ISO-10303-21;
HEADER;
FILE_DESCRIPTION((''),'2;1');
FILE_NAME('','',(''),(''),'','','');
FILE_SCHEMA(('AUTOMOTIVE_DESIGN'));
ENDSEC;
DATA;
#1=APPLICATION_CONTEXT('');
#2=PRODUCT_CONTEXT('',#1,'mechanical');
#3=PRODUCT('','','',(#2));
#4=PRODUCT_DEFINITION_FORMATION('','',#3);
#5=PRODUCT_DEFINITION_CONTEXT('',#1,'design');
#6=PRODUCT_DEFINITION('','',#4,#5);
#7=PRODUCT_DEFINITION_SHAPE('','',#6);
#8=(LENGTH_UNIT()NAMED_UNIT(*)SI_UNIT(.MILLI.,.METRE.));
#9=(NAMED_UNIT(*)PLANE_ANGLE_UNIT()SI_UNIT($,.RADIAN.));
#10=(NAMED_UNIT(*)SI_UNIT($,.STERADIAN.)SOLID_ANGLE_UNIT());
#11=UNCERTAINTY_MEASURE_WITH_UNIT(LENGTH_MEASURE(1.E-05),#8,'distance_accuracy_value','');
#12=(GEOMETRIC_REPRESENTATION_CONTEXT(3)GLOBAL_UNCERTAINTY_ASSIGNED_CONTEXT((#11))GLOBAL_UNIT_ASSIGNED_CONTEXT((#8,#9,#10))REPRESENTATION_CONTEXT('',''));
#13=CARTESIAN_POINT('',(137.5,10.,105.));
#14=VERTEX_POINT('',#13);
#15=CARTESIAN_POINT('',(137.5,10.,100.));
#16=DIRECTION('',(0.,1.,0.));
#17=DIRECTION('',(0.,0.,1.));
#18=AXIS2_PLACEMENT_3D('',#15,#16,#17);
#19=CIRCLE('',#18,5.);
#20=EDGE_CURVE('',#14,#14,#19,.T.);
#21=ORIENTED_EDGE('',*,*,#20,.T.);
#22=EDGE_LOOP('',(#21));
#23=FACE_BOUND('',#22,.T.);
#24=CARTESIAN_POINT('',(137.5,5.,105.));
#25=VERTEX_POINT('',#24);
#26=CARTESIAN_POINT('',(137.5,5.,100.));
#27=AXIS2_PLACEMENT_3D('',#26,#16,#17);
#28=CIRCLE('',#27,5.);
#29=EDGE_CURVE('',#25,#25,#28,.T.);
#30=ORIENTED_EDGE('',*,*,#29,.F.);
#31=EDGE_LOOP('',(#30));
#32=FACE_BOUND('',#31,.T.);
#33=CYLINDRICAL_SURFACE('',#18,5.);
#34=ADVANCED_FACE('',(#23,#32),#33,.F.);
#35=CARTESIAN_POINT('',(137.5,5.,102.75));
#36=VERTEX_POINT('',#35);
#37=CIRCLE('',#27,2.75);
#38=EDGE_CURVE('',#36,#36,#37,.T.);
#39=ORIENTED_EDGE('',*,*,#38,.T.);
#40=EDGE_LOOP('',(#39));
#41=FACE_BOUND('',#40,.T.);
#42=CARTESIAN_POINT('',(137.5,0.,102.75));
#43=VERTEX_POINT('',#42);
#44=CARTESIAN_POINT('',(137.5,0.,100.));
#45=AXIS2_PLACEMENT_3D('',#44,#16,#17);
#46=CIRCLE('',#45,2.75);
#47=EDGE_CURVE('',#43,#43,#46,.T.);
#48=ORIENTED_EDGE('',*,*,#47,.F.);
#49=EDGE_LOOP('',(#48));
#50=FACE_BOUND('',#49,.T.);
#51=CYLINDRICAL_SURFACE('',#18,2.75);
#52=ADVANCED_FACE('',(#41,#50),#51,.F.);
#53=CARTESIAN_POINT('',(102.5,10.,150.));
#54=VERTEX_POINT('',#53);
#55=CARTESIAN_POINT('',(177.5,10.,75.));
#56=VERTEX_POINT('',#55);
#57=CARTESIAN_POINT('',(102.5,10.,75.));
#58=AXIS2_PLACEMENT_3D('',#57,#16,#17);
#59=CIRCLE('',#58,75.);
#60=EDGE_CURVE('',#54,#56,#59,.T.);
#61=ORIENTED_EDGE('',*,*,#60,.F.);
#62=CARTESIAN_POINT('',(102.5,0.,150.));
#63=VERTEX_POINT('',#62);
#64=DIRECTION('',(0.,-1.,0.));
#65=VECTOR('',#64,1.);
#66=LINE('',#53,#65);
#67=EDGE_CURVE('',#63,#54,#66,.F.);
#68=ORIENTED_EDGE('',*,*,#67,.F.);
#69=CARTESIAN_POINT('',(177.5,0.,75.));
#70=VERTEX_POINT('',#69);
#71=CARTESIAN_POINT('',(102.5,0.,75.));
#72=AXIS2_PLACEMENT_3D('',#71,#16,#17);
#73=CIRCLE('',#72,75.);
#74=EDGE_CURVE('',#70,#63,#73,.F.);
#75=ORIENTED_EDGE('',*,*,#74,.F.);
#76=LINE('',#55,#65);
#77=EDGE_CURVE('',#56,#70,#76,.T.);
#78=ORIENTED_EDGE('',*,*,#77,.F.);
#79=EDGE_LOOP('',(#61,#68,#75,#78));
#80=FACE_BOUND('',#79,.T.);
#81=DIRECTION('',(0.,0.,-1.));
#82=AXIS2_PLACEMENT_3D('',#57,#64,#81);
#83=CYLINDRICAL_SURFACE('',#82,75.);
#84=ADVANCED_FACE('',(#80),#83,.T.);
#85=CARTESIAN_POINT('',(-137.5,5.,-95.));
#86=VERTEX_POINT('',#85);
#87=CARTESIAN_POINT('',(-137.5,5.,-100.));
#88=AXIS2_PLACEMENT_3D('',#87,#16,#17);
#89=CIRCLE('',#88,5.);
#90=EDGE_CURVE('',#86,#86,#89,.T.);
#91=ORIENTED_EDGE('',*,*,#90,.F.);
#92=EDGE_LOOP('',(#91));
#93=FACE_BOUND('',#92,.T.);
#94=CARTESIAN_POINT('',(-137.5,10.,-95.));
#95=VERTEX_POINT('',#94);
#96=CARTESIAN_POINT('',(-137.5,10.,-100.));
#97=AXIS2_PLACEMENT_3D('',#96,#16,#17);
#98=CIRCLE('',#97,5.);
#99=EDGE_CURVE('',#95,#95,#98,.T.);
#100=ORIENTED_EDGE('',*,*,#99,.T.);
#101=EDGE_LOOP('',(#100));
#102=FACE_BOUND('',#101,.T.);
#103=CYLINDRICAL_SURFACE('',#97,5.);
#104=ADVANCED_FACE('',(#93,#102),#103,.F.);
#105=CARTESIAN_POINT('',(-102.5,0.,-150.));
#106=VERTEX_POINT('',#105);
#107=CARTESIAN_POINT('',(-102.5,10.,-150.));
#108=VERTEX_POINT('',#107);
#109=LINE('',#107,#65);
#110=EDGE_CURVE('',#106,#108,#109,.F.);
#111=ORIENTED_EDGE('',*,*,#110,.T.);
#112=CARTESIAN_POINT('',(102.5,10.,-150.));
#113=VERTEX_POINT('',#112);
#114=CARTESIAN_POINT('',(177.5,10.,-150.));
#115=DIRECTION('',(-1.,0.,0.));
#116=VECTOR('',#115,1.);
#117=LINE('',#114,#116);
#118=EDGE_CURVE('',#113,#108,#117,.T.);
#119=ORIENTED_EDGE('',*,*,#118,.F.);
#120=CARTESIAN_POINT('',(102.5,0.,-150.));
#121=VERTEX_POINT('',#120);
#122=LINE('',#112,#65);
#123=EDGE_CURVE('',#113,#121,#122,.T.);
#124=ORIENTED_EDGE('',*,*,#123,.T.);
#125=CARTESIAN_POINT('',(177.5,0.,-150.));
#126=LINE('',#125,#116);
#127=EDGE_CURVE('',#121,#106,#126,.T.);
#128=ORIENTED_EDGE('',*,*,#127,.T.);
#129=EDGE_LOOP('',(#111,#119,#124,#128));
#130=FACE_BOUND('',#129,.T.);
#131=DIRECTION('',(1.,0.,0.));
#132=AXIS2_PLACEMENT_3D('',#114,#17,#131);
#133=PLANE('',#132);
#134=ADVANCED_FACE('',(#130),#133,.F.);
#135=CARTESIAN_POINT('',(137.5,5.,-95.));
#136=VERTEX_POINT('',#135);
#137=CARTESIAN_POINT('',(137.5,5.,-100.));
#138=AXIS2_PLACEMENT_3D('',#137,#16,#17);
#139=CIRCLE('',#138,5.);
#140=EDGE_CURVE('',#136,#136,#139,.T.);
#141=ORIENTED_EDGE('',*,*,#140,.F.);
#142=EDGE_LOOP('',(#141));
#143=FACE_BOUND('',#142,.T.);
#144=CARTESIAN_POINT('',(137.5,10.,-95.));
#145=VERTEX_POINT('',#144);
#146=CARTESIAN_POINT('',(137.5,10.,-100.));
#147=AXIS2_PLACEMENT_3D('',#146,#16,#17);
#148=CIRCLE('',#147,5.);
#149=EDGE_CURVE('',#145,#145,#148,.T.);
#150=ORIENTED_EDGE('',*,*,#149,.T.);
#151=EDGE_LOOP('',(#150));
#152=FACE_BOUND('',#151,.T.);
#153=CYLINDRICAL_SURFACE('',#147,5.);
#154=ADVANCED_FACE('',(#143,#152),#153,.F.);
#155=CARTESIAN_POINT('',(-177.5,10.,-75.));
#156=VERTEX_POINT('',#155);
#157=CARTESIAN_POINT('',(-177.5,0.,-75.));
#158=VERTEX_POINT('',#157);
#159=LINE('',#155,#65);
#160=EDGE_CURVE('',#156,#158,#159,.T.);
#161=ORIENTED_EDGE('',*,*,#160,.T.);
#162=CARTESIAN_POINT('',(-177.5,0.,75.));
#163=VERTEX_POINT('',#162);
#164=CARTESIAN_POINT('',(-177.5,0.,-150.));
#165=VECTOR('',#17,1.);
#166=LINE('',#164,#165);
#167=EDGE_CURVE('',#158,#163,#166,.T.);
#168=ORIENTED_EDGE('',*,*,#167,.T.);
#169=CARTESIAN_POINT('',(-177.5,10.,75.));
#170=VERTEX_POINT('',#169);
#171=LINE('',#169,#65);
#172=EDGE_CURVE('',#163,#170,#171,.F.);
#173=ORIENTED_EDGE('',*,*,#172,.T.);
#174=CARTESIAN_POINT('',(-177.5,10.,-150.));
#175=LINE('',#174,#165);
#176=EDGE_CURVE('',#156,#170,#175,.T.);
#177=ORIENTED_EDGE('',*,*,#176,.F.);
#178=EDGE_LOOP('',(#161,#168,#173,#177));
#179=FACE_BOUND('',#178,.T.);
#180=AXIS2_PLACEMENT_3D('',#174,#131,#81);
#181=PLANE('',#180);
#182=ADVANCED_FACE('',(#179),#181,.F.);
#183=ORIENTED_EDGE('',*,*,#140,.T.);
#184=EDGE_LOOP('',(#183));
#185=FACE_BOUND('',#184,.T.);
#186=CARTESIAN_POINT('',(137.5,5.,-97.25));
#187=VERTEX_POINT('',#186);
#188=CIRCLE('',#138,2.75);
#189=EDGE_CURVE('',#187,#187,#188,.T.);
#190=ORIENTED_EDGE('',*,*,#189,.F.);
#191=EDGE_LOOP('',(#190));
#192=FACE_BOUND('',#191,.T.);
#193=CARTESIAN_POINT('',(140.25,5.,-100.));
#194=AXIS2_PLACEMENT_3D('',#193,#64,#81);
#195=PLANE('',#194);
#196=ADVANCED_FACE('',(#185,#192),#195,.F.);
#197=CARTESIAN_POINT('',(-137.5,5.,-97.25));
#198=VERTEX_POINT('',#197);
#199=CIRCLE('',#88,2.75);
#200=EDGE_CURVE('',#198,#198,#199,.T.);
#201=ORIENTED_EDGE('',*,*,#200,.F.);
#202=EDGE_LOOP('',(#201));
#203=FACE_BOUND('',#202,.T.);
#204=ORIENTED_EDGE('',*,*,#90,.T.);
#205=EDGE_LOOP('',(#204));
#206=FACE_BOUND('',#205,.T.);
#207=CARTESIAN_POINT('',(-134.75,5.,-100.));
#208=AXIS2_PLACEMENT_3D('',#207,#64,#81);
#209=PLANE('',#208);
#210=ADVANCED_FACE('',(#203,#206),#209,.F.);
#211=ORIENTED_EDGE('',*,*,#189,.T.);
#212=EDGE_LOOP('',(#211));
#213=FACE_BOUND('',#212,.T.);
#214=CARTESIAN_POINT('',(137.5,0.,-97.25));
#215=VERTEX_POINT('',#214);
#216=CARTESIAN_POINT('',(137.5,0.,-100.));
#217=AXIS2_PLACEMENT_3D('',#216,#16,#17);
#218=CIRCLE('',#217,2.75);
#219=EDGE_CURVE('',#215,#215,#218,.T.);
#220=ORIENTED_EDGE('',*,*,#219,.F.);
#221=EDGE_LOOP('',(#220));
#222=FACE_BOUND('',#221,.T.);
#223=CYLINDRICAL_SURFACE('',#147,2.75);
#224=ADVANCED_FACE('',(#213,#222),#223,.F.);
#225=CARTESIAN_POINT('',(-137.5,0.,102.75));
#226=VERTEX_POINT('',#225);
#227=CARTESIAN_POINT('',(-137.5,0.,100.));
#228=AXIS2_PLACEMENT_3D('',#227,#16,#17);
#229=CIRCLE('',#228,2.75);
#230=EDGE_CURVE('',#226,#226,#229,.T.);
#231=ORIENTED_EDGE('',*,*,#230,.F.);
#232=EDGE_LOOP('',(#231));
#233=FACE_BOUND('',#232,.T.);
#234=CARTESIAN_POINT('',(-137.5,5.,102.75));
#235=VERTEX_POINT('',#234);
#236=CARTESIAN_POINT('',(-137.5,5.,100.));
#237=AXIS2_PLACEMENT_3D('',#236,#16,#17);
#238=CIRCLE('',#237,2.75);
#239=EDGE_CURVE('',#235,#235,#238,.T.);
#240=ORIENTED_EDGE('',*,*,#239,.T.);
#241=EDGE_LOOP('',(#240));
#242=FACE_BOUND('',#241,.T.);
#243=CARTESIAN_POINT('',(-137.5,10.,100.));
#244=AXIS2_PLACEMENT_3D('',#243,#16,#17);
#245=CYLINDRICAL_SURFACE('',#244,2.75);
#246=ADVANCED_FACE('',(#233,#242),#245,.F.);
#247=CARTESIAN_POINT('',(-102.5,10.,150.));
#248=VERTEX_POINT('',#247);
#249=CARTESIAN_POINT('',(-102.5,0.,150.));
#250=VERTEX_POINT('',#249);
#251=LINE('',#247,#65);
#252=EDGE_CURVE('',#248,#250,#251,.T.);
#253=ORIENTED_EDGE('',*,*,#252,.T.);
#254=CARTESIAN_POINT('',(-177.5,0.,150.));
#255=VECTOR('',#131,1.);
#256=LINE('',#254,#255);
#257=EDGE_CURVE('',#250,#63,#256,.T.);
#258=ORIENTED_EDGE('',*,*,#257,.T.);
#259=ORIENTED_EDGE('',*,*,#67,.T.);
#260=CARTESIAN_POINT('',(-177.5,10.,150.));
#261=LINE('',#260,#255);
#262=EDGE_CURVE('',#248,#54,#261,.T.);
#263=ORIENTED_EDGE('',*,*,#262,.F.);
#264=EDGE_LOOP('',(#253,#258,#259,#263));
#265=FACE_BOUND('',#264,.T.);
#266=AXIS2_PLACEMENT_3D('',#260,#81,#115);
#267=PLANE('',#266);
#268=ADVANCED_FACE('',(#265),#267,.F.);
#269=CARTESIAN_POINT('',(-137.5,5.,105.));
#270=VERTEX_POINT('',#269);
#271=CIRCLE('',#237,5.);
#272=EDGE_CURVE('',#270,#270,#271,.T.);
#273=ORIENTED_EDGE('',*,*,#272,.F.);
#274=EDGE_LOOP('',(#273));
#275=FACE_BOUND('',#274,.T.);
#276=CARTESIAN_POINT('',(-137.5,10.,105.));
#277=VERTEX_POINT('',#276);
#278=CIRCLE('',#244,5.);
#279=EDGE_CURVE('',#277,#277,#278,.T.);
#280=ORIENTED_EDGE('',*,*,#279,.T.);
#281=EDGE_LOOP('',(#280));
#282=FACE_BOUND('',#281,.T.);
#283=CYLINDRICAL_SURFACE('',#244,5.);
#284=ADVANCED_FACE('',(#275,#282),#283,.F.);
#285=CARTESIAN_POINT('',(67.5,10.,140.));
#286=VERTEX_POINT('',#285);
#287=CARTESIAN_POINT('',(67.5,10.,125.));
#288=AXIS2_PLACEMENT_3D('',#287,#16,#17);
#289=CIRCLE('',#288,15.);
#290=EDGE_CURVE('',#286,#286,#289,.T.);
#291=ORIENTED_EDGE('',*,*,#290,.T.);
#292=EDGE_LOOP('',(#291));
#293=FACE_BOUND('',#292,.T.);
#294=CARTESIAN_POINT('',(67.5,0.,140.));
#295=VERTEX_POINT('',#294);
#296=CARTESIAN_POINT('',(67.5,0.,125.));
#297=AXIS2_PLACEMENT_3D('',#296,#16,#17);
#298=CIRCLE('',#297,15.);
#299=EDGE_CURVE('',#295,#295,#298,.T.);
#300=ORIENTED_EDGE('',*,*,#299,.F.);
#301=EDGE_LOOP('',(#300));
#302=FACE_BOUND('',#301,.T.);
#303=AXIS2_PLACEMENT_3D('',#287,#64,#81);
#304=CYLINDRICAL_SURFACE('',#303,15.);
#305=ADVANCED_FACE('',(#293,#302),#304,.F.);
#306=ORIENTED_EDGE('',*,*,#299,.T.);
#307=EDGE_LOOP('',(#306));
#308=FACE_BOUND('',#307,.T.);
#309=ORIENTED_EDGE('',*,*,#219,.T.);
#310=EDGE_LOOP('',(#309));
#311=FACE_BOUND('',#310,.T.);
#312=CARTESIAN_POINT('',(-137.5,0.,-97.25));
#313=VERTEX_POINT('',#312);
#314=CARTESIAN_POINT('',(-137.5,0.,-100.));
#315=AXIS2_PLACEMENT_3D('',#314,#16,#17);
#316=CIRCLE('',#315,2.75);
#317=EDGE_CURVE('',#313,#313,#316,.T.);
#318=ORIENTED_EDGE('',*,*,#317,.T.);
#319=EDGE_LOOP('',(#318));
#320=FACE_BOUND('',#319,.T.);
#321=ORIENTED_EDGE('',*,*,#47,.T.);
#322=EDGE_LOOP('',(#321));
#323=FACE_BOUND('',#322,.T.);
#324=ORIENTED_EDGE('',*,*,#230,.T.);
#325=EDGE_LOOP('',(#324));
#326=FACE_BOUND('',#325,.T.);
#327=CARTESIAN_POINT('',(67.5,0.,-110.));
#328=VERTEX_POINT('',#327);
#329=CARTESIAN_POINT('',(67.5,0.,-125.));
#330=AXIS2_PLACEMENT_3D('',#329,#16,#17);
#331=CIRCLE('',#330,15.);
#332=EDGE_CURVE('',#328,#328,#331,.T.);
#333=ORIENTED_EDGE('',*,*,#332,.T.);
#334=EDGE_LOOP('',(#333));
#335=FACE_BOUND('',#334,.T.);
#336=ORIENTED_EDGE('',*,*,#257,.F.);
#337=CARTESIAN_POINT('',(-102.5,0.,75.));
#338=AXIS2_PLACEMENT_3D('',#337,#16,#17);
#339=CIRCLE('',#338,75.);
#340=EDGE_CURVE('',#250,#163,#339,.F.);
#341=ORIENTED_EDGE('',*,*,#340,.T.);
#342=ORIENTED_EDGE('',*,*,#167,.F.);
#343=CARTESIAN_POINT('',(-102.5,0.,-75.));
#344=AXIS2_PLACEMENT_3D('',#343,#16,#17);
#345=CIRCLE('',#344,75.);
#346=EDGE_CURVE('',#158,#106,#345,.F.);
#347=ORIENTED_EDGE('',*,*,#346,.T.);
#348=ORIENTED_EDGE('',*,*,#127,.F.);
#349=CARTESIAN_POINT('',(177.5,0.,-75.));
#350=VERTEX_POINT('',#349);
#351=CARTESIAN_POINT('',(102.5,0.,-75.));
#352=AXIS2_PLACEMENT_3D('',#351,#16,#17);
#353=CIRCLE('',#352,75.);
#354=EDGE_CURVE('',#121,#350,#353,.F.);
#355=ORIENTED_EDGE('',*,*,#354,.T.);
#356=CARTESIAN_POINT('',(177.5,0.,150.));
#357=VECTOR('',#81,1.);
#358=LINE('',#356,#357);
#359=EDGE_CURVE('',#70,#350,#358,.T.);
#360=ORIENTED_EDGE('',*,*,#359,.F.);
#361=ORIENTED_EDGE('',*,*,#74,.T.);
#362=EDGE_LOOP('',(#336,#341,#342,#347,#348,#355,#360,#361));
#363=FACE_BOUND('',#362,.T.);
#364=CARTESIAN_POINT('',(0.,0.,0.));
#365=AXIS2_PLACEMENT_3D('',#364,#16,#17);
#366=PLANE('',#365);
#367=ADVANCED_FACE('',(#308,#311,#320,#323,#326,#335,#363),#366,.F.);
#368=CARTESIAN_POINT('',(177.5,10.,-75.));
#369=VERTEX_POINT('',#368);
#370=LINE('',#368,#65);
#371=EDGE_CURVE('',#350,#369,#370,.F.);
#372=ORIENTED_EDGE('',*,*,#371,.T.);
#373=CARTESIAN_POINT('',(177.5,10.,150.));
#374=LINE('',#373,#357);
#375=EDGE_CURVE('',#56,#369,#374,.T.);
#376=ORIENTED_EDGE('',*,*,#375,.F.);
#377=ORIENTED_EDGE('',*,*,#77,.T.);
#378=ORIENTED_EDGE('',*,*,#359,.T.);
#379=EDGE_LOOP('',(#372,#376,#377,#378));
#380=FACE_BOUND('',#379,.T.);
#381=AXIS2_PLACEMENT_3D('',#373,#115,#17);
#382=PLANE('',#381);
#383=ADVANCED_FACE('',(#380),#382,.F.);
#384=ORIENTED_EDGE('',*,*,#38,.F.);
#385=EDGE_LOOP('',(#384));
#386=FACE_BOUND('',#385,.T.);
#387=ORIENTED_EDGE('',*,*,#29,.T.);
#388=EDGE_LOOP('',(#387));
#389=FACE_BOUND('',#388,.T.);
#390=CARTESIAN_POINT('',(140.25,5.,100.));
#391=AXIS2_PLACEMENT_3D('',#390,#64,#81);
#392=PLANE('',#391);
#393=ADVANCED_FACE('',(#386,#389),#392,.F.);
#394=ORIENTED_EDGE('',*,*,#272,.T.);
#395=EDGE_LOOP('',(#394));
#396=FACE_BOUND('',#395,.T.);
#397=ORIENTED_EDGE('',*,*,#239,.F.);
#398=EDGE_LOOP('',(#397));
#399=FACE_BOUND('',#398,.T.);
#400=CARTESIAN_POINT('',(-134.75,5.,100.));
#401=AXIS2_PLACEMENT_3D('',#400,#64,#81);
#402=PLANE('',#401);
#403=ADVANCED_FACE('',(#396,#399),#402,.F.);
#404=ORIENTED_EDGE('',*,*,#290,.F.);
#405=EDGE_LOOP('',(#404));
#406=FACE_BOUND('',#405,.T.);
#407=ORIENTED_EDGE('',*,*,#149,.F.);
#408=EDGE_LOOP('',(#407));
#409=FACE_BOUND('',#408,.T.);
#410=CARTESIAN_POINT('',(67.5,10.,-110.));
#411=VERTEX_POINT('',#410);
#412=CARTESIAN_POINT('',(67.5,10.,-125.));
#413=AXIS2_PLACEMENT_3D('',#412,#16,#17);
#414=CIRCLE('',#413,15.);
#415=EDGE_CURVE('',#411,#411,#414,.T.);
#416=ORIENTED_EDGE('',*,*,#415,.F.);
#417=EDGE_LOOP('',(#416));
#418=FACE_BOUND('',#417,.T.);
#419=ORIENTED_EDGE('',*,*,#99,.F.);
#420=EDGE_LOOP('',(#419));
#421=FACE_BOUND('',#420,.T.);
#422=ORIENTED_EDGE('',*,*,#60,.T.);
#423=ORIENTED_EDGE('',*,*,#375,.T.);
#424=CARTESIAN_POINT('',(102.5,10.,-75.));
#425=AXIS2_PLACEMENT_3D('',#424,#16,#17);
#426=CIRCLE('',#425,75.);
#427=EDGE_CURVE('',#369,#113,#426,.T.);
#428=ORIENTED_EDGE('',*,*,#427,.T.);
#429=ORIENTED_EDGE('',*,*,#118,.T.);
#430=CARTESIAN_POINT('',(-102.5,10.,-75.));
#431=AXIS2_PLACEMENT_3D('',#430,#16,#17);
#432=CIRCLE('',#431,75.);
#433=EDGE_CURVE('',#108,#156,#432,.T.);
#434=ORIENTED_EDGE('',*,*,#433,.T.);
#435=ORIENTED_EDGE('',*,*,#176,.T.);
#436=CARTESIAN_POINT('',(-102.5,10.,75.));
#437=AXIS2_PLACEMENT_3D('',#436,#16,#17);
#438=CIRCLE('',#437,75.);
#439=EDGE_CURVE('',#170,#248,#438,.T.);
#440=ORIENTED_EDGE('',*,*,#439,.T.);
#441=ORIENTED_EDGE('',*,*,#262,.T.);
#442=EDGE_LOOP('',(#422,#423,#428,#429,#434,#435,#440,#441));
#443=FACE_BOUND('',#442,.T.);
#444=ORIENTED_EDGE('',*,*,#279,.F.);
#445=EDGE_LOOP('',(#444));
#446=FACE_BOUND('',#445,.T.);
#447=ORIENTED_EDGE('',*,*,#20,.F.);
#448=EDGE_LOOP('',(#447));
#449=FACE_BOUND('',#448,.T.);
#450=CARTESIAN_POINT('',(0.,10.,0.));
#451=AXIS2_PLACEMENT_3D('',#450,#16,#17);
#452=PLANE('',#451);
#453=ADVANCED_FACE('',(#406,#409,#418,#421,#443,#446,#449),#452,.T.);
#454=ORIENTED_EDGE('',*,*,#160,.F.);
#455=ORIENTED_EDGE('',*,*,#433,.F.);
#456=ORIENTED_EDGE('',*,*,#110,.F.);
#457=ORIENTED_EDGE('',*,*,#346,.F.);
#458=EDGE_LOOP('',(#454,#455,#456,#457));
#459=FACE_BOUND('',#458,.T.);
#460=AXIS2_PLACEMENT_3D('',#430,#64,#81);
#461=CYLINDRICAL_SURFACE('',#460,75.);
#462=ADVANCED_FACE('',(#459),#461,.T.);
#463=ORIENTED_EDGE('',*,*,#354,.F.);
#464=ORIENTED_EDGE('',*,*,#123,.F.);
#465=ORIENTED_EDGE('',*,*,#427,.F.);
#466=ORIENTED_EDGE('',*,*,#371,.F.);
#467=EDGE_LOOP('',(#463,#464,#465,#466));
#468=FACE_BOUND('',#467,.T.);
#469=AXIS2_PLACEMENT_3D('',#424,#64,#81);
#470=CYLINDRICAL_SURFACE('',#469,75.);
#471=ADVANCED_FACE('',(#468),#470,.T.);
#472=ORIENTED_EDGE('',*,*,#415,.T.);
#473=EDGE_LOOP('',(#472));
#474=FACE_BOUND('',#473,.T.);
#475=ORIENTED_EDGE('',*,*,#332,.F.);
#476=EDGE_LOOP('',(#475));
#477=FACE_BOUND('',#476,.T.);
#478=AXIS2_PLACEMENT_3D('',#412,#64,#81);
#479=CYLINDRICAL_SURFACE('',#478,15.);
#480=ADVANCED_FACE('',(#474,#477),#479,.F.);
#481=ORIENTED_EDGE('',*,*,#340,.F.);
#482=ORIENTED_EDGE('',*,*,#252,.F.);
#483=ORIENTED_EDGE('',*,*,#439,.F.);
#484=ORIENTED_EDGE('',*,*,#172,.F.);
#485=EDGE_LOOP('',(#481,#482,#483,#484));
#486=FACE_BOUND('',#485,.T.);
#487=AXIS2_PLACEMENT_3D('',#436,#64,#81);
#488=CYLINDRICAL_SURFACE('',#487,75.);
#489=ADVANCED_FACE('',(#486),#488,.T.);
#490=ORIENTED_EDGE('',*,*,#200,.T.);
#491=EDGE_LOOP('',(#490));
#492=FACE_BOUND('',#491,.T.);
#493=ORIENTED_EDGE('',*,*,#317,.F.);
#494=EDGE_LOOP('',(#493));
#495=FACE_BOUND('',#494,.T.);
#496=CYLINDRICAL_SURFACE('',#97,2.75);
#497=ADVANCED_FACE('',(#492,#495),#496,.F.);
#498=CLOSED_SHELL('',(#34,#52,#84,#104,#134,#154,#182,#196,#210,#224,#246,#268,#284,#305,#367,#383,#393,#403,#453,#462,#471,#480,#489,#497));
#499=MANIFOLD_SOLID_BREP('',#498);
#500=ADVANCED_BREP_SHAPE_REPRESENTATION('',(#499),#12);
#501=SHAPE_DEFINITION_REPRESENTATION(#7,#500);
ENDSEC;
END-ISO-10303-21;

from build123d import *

# Parameters (mm, degrees)
SKETCH11_W                     = 355
SKETCH11_H                     = 300
SKETCH11_R                     = 15
BOSS_EXTRUDE2_DEPTH            = 10
CBORE_START                    = 5
CBORE_FOR_M5_SHCS1_OUTLINE_R   = 5
CBORE_FOR_M5_SHCS1_DEPTH       = 5
CBORE_FOR_M5_SHCS1_2_OUTLINE_R = 2.75
CBORE_FOR_M5_SHCS1_2_DEPTH     = 5
FILLET1_R                      = 75


# Read off the part's stored shape, not the designer's step: CBORE for M5 SHCS1
with BuildPart() as part:
    # Sketch11 → Boss-Extrude2 (new body)
    with BuildSketch(Plane(origin=(0, 0, 0), x_dir=(1, 0, 0), z_dir=(0, 1, 0))):
        Rectangle(SKETCH11_W, SKETCH11_H)
        with Locations(Location((67.5, -125, 0), (0, 0, 270))):
            Circle(SKETCH11_R, mode=Mode.SUBTRACT)
        with Locations(Location((67.5, 125, 0), (0, 0, 270))):
            Circle(SKETCH11_R, mode=Mode.SUBTRACT)
    extrude(amount=BOSS_EXTRUDE2_DEPTH)

    # CBORE for M5 SHCS1 outline → CBORE for M5 SHCS1 (cut)
    with BuildSketch(Plane(origin=(0, 0, 0), x_dir=(1, 0, 0), z_dir=(0, 1, 0)).offset(CBORE_START)):
        with Locations((137.5, 100)):
            Circle(CBORE_FOR_M5_SHCS1_OUTLINE_R)
        with Locations((-137.5, -100)):
            Circle(CBORE_FOR_M5_SHCS1_OUTLINE_R)
        with Locations((-137.5, 100)):
            Circle(CBORE_FOR_M5_SHCS1_OUTLINE_R)
        with Locations((137.5, -100)):
            Circle(CBORE_FOR_M5_SHCS1_OUTLINE_R)
    extrude(amount=CBORE_FOR_M5_SHCS1_DEPTH, mode=Mode.SUBTRACT)

    # CBORE for M5 SHCS1 2 outline → CBORE for M5 SHCS1 2 (cut)
    with BuildSketch(Plane(origin=(0, 0, 0), x_dir=(1, 0, 0), z_dir=(0, 1, 0))):
        with Locations((137.5, 100)):
            Circle(CBORE_FOR_M5_SHCS1_2_OUTLINE_R)
        with Locations((-137.5, -100)):
            Circle(CBORE_FOR_M5_SHCS1_2_OUTLINE_R)
        with Locations((-137.5, 100)):
            Circle(CBORE_FOR_M5_SHCS1_2_OUTLINE_R)
        with Locations((137.5, -100)):
            Circle(CBORE_FOR_M5_SHCS1_2_OUTLINE_R)
    extrude(amount=CBORE_FOR_M5_SHCS1_2_DEPTH, mode=Mode.SUBTRACT)

    # Fillet1
    fillet1_edges = [part.edges().sort_by_distance(p)[0] for p in [
        (177.5, 5, -150),
        (177.5, 5, 150),
        (-177.5, 5, 150),
        (-177.5, 5, -150),
    ]]
    fillet(fillet1_edges, radius=FILLET1_R)


solid = part.part
